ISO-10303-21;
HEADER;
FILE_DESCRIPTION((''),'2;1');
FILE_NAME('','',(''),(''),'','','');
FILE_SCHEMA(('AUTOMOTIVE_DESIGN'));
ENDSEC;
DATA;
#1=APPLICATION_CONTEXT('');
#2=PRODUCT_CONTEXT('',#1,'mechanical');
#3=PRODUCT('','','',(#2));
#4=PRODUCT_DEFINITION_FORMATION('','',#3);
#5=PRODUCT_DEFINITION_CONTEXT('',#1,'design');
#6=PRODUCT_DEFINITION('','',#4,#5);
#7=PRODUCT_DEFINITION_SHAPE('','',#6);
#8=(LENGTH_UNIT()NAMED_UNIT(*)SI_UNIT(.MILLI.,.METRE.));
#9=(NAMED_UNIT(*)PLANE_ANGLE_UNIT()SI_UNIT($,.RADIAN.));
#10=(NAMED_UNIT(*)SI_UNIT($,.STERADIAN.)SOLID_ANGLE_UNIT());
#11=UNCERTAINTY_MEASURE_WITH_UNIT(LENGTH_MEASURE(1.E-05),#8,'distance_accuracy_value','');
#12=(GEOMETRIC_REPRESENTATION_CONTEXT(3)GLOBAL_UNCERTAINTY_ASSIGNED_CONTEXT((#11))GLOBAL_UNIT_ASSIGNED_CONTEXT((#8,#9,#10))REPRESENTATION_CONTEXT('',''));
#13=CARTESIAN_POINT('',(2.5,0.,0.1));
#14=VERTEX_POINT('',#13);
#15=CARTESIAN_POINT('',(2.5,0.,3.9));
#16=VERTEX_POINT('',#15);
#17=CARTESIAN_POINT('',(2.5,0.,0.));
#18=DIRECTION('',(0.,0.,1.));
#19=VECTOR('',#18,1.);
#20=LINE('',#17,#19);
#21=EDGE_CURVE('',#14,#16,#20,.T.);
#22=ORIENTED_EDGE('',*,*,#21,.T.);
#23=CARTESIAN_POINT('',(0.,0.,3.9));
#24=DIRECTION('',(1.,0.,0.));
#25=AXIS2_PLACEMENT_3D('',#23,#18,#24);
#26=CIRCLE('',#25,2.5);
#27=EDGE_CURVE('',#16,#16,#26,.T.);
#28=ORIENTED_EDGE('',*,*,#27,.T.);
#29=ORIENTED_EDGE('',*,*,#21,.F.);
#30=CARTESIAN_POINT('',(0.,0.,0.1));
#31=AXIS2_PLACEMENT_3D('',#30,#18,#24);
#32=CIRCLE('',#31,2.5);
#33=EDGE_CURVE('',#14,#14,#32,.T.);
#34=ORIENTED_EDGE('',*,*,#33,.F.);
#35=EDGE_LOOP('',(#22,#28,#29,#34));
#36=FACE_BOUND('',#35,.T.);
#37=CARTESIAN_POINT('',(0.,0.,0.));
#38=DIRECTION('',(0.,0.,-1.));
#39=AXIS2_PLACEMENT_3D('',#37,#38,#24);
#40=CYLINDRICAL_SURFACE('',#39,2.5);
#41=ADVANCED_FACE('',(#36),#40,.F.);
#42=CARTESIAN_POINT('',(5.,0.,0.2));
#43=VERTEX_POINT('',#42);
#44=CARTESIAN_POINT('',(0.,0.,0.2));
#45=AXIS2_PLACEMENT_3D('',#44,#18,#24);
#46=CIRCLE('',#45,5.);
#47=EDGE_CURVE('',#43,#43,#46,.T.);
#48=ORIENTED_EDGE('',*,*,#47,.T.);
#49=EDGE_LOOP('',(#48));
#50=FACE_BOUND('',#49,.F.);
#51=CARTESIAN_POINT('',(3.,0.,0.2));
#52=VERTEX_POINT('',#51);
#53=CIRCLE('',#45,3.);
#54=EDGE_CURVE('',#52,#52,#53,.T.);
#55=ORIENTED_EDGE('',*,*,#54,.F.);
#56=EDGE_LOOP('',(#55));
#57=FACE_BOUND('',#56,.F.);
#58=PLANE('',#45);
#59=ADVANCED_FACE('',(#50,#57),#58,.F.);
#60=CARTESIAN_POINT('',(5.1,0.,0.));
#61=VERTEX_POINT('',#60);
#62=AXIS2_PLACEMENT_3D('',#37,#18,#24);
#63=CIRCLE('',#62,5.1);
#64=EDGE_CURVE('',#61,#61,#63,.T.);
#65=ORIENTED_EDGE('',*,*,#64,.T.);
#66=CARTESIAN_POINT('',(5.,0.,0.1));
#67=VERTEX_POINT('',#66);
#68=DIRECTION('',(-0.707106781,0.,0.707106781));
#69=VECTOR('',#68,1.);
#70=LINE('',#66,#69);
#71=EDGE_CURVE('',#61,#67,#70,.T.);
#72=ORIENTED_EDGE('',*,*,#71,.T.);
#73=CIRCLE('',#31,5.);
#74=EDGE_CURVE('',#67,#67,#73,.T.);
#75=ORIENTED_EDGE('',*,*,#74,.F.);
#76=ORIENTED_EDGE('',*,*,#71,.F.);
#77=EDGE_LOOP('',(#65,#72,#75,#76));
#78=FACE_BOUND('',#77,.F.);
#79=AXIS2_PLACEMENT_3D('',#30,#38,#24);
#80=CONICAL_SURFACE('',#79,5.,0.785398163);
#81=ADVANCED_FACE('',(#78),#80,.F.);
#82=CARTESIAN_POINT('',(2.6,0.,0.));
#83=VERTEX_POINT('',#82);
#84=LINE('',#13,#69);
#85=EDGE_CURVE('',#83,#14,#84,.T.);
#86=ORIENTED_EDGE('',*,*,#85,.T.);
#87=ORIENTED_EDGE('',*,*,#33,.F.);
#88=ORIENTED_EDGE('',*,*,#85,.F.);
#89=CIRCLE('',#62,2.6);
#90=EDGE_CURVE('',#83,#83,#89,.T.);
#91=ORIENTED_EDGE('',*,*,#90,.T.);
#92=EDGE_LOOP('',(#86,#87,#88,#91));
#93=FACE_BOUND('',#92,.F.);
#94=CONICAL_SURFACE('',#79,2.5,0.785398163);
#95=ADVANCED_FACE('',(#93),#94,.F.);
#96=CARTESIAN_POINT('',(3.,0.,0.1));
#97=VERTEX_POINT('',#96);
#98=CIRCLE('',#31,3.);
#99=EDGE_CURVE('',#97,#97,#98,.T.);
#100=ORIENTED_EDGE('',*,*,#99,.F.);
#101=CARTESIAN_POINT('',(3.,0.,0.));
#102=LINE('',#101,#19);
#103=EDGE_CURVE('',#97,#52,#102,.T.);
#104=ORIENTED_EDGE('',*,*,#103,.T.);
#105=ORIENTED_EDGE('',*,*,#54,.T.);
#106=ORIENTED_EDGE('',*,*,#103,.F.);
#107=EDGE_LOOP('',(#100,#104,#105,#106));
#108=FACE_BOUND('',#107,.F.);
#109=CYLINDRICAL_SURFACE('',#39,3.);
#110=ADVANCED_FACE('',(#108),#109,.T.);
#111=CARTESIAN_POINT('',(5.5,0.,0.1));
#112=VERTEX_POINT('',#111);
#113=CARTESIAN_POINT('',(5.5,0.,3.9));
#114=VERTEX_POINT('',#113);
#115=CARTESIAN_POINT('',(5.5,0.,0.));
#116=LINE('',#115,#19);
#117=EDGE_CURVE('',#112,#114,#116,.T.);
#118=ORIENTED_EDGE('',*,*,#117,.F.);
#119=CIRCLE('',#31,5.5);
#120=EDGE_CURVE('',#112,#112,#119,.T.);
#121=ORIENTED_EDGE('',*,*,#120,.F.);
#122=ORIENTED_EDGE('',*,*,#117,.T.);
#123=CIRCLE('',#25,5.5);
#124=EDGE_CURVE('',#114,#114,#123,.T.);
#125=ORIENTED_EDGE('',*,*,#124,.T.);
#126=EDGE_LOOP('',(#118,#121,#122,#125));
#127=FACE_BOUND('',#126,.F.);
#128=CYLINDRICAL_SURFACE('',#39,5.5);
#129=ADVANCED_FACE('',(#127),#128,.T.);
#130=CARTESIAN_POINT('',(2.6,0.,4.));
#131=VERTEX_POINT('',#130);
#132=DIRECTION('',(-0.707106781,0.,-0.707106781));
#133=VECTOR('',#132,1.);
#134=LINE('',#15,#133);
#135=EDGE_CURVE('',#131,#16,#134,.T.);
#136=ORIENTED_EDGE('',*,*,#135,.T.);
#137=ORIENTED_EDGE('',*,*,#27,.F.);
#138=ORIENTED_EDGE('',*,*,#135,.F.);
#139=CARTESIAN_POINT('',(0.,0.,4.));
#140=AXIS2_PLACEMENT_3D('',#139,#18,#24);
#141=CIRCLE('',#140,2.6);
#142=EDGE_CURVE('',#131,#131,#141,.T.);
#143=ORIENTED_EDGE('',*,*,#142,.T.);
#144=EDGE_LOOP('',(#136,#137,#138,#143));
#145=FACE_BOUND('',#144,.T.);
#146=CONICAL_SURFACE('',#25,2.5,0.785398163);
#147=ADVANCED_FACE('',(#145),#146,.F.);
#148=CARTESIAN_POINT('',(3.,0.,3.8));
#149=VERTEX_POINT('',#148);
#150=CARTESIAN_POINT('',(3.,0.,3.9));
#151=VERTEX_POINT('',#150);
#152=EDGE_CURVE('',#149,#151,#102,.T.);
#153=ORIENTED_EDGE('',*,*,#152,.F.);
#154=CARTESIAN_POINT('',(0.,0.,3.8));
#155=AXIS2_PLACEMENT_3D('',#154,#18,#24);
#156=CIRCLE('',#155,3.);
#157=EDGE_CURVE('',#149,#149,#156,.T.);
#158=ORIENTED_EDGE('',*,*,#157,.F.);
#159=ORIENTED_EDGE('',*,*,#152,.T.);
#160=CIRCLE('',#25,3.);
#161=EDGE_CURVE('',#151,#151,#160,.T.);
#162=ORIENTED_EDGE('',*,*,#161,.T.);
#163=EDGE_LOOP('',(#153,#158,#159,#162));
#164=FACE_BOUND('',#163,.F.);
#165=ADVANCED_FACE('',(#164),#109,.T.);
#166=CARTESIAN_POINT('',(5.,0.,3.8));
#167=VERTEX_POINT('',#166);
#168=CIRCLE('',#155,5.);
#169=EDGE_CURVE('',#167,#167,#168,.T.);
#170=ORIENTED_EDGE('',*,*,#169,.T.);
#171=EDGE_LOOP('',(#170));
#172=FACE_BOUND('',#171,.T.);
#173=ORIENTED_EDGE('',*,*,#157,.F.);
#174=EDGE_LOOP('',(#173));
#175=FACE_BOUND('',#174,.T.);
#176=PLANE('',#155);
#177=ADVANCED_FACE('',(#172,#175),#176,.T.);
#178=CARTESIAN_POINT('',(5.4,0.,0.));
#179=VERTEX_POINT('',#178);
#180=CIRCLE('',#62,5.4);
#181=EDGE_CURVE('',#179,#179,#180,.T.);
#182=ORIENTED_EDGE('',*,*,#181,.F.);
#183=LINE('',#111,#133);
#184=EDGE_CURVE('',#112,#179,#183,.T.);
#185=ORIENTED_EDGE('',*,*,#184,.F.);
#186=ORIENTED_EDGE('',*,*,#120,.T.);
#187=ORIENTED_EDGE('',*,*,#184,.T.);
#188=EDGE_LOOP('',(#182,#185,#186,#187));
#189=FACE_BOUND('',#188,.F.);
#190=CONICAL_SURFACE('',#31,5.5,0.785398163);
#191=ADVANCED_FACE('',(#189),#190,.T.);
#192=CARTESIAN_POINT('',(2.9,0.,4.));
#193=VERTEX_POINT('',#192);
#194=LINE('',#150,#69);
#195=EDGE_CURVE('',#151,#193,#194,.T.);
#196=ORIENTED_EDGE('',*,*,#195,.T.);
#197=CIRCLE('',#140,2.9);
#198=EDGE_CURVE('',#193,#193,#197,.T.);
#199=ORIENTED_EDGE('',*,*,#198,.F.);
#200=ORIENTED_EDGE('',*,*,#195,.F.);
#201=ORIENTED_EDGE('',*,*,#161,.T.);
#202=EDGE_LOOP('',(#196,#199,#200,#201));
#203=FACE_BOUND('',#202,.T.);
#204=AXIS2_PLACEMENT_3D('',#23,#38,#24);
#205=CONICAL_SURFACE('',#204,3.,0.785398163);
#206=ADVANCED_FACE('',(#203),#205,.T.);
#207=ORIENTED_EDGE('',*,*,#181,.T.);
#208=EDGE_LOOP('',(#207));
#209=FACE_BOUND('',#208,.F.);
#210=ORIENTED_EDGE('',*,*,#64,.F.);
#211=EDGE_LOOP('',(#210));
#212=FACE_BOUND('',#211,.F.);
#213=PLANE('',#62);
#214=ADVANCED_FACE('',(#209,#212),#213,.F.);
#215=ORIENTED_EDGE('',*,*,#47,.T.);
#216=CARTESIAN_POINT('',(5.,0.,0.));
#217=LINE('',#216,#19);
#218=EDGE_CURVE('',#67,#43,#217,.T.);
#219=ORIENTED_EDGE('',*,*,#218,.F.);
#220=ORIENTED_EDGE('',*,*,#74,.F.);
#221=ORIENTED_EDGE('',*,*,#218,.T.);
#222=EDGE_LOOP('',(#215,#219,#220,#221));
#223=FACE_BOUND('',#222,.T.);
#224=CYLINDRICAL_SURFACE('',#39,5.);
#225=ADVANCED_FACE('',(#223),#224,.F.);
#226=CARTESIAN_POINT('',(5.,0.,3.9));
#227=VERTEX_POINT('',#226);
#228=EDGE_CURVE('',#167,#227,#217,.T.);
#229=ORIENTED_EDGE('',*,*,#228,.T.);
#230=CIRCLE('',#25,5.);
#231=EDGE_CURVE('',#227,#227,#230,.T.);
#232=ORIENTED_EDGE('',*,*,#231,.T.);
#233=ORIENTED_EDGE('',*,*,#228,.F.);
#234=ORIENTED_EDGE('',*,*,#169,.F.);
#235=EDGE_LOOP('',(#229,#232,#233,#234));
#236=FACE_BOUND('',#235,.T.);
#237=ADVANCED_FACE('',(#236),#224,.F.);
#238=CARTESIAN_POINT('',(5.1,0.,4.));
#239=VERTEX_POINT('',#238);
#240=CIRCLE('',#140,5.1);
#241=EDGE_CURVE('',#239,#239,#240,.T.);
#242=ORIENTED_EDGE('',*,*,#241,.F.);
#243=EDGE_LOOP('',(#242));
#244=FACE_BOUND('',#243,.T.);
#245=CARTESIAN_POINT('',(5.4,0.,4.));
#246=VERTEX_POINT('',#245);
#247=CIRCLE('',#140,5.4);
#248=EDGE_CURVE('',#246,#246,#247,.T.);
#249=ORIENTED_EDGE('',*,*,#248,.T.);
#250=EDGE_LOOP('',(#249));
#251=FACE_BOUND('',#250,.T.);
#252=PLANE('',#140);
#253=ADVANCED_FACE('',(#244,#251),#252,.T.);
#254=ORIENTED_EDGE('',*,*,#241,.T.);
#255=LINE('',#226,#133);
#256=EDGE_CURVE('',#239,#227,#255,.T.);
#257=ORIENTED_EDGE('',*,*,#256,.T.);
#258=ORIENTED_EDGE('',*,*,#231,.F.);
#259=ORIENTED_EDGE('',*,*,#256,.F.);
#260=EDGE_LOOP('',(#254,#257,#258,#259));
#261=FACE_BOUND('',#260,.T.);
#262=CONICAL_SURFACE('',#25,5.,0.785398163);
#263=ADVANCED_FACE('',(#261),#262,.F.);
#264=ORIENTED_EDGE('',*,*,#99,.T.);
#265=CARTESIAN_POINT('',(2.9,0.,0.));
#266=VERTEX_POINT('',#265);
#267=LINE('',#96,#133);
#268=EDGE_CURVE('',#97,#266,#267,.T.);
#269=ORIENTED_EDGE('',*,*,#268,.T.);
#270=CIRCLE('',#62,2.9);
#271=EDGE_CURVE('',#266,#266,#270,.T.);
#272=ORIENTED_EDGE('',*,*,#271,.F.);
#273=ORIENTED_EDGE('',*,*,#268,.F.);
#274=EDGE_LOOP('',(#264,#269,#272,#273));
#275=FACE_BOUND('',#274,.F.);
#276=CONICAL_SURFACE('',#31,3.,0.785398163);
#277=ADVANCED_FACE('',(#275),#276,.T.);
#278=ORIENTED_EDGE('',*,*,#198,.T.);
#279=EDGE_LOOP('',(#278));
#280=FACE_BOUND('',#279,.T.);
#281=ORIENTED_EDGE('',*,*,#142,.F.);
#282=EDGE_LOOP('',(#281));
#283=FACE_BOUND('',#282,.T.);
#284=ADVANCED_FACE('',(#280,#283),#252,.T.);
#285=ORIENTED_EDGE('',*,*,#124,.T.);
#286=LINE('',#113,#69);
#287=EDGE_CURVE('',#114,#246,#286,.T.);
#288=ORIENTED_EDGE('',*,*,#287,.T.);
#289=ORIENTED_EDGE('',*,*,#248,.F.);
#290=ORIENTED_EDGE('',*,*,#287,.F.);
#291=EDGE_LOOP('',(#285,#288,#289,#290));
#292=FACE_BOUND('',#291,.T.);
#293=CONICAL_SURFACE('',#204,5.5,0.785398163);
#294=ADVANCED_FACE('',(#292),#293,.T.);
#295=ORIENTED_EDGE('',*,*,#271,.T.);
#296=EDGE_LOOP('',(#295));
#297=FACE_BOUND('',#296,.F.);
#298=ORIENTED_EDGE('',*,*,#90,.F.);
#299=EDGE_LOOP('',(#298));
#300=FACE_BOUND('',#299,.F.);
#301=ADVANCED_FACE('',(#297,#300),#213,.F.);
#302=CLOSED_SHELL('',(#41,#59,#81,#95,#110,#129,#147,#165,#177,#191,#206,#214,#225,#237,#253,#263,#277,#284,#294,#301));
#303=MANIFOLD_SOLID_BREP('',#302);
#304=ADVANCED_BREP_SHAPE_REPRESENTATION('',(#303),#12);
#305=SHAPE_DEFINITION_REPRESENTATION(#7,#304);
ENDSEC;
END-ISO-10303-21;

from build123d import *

# Parameters (mm, degrees)
F0_R     = 3
F0_R_2   = 2.5
F1_DEPTH = 4
F0_R_3   = 5.5
F0_R_4   = 5
F2_START = 0.2
F2_DEPTH = 3.6
F3_SIZE  = 0.1


with BuildPart() as f1:
    # F0 (on Top) → F1 (new body)
    with BuildSketch(Plane.XY):
        Circle(F0_R)
        Circle(F0_R_2, mode=Mode.SUBTRACT)
    extrude(amount=F1_DEPTH)



with BuildPart() as f1b:
    # F0 (on Top) → F1, piece 2 (new body)
    with BuildSketch(Plane.XY):
        Circle(F0_R_3)
        Circle(F0_R_4, mode=Mode.SUBTRACT)
    extrude(amount=F1_DEPTH)


with BuildPart() as f1_1:
    add(f1.part)

    add(f1b.part)  # F2 merges F1b
    # F0 (on Top) → F2 (join)
    with BuildSketch(Plane.XY.offset(F2_START)):
        Circle(F0_R_4)
        Circle(F0_R, mode=Mode.SUBTRACT)
    extrude(amount=F2_DEPTH)

    # F3
    f3_edges = [f1_1.edges().sort_by_distance(p)[0] for p in [
        (-3, 0, 0),
        (-2.5, 0, 0),
        (-5.5, 0, 4),
        (-5, 0, 4),
        (-3, 0, 4),
        (-2.5, 0, 4),
        (-5.5, 0, 0),
        (-5, 0, 0),
    ]]
    chamfer(f3_edges, length=F3_SIZE)


solid = f1_1.part
